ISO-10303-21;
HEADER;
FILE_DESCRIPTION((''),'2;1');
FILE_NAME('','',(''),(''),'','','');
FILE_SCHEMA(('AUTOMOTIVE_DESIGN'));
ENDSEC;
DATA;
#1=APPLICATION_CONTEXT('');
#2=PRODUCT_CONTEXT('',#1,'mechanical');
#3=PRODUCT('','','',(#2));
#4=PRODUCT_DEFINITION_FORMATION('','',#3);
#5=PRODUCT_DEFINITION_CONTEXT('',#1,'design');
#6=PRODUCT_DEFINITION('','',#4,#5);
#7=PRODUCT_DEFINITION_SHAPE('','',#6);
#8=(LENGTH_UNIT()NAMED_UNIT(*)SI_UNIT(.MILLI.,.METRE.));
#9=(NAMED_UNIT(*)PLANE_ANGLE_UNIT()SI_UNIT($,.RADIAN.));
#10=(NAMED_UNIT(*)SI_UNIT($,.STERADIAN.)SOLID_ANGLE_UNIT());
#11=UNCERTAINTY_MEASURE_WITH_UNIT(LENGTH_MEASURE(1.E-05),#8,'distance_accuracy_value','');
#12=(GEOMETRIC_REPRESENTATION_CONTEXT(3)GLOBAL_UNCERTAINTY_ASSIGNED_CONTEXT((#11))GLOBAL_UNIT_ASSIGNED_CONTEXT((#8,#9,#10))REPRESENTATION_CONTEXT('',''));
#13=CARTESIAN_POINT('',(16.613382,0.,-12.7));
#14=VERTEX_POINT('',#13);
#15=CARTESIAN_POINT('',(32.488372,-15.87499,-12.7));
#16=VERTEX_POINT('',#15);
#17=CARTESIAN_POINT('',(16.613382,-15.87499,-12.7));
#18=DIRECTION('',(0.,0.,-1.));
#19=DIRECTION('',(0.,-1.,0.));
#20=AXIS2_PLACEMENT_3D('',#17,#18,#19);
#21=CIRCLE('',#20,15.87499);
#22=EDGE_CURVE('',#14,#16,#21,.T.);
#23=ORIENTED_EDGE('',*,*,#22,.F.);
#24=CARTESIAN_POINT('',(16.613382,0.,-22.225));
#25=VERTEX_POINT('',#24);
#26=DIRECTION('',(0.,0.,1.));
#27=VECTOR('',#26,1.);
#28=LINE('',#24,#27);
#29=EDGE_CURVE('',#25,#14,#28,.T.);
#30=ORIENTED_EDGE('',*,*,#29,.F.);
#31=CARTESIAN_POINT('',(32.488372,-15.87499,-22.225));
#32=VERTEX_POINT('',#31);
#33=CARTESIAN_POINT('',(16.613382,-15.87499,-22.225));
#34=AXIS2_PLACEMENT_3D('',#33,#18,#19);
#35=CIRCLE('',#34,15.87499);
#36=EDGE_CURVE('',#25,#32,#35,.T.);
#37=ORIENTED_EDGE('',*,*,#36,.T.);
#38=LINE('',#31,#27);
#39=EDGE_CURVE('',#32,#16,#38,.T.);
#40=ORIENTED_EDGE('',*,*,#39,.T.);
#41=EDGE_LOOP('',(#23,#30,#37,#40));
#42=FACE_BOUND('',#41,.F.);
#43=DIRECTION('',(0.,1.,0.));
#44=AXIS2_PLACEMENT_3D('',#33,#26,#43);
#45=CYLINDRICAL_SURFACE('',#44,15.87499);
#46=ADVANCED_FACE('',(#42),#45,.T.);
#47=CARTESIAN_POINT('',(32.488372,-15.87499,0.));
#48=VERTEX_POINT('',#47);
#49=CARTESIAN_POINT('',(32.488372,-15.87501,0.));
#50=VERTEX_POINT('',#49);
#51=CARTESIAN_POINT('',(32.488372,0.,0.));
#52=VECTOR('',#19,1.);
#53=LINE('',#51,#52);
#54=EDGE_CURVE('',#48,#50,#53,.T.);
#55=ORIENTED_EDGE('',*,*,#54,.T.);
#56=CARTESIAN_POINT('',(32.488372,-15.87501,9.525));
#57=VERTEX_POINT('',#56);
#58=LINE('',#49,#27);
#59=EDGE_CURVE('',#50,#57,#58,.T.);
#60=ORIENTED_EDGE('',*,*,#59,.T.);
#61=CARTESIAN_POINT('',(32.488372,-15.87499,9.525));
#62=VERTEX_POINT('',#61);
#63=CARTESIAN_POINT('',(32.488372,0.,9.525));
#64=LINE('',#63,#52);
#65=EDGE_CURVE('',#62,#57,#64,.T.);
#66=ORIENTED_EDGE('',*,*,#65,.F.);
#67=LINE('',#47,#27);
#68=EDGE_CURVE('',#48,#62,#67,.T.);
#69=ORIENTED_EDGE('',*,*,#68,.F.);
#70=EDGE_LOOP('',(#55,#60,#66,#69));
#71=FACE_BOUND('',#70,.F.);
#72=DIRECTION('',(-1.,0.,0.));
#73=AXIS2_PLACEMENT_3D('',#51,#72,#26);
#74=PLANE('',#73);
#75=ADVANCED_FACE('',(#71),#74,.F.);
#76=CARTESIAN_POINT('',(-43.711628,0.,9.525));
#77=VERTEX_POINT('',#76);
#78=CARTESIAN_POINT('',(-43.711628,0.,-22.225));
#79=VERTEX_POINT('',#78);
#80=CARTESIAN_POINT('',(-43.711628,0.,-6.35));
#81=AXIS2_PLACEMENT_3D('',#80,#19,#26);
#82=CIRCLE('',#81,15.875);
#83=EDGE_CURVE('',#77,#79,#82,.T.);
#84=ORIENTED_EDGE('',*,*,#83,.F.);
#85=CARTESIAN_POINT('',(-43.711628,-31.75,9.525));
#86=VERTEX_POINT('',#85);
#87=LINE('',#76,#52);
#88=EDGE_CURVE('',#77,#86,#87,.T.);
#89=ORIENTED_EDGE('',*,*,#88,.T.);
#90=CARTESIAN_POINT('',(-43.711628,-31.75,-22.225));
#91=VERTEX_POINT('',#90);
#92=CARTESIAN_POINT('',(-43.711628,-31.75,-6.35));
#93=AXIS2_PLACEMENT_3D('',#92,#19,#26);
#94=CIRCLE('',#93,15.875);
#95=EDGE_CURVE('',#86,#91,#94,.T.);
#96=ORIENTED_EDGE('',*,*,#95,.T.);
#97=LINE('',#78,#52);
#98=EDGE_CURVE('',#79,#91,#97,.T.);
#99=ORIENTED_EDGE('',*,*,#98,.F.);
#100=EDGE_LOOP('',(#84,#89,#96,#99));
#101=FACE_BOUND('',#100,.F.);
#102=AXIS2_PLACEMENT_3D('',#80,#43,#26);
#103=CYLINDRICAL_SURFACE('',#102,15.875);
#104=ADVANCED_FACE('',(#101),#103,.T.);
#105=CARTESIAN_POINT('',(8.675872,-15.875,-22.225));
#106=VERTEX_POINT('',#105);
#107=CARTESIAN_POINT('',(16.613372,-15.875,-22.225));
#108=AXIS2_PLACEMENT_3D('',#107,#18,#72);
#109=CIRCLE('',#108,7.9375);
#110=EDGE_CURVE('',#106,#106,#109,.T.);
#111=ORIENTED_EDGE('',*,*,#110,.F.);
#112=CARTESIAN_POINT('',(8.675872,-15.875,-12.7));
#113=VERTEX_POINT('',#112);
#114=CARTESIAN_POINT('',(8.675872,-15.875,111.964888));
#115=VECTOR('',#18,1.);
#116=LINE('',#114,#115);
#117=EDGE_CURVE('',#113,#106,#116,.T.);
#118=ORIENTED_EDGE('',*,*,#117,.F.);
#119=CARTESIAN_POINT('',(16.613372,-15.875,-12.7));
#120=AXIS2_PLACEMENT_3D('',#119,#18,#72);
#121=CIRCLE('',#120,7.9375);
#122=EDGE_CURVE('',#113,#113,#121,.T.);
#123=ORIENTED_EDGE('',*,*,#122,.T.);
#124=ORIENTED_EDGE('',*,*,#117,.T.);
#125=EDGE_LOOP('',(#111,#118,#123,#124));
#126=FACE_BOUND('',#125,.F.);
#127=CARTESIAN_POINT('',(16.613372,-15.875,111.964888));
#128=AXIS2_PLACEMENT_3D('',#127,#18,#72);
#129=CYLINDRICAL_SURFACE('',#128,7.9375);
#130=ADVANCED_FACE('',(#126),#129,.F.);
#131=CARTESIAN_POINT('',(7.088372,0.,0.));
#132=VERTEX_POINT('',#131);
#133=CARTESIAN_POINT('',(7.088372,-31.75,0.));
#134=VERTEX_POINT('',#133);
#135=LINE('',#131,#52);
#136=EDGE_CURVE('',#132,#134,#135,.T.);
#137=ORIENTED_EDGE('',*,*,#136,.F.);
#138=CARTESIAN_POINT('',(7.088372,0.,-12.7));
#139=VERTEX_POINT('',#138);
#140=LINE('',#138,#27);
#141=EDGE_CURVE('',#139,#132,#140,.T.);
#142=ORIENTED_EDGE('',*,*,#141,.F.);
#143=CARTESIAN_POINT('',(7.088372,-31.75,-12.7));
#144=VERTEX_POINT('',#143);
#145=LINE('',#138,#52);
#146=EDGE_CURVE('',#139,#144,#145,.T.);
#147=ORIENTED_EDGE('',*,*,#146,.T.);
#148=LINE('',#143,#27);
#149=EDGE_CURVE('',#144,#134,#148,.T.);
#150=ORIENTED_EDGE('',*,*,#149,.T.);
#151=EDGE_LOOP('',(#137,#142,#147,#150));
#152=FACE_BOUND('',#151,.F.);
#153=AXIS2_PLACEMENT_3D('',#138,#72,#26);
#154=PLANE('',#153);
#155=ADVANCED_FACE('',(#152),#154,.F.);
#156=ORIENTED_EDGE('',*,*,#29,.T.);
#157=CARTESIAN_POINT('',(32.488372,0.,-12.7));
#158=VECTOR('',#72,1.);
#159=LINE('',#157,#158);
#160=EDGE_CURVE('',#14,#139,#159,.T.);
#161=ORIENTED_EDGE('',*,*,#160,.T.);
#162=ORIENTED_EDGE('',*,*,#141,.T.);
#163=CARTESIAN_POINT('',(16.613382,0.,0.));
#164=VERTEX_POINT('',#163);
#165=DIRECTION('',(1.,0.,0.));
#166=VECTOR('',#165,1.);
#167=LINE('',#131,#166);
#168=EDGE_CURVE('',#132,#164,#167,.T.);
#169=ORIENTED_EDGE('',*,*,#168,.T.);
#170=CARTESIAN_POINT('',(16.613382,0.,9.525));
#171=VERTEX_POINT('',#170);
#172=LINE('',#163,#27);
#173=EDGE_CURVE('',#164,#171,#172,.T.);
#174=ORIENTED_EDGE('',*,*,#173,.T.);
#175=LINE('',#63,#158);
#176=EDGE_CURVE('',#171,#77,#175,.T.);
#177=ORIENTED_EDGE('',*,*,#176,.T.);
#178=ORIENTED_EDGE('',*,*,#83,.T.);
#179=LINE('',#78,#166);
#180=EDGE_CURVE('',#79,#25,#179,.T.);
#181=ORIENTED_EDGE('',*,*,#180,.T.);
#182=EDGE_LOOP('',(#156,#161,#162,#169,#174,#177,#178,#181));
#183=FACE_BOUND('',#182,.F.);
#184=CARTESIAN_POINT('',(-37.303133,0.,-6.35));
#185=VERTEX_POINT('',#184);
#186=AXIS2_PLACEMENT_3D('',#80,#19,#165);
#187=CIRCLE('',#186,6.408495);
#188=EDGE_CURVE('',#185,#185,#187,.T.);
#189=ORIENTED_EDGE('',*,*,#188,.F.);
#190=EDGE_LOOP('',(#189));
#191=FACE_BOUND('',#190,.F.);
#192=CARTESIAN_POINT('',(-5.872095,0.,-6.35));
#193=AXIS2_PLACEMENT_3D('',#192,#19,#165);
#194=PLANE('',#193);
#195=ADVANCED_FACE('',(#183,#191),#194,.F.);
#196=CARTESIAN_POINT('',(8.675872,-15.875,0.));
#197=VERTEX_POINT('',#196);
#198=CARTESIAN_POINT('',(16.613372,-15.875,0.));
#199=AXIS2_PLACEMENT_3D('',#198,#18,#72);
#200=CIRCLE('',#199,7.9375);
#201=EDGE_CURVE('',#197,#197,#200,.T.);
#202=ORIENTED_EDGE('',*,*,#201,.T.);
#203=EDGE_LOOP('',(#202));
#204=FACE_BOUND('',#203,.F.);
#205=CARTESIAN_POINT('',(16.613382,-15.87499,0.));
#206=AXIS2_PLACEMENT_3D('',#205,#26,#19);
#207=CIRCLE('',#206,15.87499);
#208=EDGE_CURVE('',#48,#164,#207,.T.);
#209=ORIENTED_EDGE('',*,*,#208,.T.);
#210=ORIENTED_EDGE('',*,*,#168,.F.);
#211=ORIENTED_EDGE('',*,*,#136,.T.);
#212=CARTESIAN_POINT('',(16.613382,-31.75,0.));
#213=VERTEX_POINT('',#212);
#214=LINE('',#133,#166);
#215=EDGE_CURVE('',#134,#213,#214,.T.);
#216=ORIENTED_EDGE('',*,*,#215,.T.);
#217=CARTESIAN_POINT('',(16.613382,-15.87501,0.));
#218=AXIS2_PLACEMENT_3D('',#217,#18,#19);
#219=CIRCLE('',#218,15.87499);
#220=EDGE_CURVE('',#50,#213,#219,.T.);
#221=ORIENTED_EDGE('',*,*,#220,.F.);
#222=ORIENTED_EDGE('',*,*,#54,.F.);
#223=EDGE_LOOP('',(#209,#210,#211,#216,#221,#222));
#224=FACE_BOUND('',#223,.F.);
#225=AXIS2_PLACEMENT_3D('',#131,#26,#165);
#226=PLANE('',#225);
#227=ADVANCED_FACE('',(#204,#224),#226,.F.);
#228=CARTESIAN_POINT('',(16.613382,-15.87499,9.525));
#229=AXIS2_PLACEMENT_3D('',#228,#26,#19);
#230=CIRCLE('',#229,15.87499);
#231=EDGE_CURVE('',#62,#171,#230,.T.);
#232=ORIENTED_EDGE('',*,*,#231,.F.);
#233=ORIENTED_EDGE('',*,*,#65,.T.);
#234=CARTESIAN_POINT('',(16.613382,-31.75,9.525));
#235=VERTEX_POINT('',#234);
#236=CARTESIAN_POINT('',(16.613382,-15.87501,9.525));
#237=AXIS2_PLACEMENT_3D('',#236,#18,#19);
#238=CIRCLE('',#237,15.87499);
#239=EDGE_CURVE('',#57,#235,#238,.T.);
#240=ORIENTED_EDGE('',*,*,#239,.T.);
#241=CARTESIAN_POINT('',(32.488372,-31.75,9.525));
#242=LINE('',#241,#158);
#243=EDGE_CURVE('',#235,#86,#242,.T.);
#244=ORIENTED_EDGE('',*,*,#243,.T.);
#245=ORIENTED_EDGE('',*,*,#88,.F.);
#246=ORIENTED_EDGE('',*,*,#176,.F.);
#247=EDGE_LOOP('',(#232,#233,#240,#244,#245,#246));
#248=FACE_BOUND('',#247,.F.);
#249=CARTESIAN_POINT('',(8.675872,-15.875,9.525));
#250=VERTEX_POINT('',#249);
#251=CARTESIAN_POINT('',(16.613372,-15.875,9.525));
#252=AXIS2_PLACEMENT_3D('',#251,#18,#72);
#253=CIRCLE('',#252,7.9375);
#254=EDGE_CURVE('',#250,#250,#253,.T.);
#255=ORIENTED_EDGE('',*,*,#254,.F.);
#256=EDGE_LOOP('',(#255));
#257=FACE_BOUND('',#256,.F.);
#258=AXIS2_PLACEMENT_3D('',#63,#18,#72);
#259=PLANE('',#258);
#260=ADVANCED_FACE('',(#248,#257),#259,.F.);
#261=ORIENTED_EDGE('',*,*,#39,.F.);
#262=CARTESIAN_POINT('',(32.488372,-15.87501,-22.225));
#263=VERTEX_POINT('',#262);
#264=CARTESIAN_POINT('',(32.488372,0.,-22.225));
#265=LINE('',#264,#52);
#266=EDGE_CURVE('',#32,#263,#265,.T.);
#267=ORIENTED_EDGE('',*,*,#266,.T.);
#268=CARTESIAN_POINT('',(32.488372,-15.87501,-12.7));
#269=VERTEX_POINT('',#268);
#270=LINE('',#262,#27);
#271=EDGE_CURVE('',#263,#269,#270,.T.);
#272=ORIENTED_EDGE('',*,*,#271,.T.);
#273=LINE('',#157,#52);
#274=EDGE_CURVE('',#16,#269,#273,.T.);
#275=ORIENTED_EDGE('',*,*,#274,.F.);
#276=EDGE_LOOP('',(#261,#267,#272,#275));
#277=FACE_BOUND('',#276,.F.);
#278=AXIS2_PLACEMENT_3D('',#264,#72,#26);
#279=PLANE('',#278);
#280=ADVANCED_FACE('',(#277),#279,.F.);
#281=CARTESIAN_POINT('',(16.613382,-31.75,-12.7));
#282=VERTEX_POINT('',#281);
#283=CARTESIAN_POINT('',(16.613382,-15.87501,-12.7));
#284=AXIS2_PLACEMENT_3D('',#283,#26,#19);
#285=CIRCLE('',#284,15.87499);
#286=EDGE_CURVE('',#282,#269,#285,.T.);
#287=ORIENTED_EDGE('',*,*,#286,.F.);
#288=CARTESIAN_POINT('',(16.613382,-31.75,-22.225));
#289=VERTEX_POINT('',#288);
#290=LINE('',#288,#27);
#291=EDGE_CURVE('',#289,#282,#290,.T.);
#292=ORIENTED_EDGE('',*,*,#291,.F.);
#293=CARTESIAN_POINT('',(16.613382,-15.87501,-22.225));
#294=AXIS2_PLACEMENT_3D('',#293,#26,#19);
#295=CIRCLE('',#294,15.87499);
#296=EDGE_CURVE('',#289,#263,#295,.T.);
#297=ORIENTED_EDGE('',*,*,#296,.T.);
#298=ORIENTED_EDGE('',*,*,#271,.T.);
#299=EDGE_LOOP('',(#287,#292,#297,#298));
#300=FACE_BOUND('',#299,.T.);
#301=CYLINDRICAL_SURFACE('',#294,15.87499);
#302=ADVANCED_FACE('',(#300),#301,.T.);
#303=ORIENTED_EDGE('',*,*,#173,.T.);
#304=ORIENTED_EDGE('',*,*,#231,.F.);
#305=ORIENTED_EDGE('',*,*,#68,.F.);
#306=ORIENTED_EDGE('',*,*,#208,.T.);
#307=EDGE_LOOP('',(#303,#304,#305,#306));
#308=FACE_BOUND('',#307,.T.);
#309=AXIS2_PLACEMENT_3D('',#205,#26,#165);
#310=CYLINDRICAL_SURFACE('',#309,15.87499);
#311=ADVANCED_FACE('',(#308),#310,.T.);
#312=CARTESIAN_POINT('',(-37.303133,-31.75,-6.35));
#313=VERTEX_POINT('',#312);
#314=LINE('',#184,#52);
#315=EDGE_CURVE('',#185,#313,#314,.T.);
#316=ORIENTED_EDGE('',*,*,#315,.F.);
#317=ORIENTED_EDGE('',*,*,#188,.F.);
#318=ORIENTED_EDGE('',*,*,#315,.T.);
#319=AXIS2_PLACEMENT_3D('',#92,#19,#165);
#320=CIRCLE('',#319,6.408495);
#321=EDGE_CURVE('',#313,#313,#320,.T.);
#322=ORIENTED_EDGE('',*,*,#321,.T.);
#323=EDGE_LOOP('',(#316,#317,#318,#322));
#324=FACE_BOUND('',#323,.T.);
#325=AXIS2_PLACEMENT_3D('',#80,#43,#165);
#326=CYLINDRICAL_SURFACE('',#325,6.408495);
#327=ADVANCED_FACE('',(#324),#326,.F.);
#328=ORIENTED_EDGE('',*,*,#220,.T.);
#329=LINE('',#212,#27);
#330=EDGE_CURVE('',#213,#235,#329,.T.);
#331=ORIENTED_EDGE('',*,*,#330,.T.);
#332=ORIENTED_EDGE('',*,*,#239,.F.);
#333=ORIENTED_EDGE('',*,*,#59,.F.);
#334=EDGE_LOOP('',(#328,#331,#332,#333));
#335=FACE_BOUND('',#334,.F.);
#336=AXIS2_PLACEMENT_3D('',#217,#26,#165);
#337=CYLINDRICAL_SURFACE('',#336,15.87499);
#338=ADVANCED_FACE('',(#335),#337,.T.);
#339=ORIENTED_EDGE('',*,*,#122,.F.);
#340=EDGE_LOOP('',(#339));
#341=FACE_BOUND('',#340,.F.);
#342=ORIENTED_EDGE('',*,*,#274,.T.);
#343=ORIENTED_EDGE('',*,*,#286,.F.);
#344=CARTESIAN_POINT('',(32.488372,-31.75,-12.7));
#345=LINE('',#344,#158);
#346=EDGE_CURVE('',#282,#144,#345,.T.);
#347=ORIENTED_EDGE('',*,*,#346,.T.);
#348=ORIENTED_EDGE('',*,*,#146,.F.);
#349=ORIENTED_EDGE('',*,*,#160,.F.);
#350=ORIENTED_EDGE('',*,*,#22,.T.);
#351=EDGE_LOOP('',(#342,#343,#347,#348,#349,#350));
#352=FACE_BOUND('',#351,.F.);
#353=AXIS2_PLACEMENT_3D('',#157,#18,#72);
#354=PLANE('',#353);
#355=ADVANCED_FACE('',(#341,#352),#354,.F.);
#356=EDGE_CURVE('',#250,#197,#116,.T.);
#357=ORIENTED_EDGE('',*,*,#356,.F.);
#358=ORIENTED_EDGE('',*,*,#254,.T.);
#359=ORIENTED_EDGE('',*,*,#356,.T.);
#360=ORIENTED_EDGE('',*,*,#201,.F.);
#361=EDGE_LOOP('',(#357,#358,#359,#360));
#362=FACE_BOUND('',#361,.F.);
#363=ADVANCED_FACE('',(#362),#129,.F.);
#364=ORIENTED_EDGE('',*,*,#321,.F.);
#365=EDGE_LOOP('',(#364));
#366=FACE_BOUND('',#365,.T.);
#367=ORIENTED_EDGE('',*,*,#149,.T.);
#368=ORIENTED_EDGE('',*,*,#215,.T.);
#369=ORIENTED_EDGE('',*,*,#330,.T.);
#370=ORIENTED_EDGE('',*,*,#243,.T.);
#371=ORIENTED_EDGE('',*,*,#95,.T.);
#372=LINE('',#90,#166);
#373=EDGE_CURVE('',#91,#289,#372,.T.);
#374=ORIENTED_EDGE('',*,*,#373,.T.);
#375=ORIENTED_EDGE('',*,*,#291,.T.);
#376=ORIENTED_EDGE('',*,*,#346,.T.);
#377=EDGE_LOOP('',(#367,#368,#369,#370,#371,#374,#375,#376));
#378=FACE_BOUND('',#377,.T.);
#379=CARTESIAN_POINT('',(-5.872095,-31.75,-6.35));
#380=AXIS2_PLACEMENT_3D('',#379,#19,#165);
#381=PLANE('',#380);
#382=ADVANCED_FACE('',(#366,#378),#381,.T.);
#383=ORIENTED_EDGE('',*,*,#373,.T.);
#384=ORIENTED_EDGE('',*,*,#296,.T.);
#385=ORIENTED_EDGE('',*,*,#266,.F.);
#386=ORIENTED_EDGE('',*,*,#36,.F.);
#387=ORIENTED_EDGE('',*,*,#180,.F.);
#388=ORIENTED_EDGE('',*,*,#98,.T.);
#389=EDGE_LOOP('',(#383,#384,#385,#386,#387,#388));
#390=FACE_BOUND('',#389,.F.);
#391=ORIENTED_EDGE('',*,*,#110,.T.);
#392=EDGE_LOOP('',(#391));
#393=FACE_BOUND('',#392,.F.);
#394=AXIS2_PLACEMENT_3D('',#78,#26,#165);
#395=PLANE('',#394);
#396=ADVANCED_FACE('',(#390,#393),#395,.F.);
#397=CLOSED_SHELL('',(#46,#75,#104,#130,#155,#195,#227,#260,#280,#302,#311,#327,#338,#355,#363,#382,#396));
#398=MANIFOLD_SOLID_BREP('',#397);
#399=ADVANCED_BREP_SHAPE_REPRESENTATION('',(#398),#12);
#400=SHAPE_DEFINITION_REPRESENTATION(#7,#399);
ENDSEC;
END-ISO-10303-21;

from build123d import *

# Parameters (mm, degrees)
F0_R     = 6.4084954246
F1_DEPTH = 31.75
F3_D     = 15.875
F4_R     = 15.87499


# Not quite as in the source:
# - a fillet or chamfer is up to 0.001 mm smaller than in the source, because OpenCascade refuses the exact size


with BuildPart() as f1:
    # F0 (on Front) → F1 (new body)
    with BuildSketch(Plane.XZ):
        with BuildLine():
            Line((32.4883715089, 9.525), (-43.7116284911, 9.525))
            ThreePointArc((-43.7116284911, 9.525), (-59.5866284911, -6.35), (-43.7116284911, -22.225))
            Line((-43.7116284911, -22.225), (32.4883715089, -22.225))
            Line((32.4883715089, -22.225), (32.4883715089, -12.7))
            Line((32.4883715089, -12.7), (7.0883715089, -12.7))
            Line((7.0883715089, -12.7), (7.0883715089, 0))
            Line((7.0883715089, 0), (32.4883715089, 0))
            Line((32.4883715089, 0), (32.4883715089, 9.525))
        make_face()
        with Locations((-43.7116284911, -6.35)):
            Circle(F0_R, mode=Mode.SUBTRACT)
    extrude(amount=F1_DEPTH)

    # F3 (through all)
    with Locations(Plane.XY.offset(9.525)):
        with Locations((16.6133715089, -15.875)):
            Hole(F3_D / 2)

    # F4 (radius 15.875 in the source; OpenCascade refuses exactly that, so slightly less here)
    f4_edges = [f1.edges().sort_by_distance(p)[0] for p in [
        (32.488372, -31.75, 4.7625),
        (32.488372, 0, 4.7625),
        (32.488372, -31.75, -17.4625),
        (32.488372, 0, -17.4625),
    ]]
    fillet(f4_edges, radius=F4_R)


solid = f1.part
